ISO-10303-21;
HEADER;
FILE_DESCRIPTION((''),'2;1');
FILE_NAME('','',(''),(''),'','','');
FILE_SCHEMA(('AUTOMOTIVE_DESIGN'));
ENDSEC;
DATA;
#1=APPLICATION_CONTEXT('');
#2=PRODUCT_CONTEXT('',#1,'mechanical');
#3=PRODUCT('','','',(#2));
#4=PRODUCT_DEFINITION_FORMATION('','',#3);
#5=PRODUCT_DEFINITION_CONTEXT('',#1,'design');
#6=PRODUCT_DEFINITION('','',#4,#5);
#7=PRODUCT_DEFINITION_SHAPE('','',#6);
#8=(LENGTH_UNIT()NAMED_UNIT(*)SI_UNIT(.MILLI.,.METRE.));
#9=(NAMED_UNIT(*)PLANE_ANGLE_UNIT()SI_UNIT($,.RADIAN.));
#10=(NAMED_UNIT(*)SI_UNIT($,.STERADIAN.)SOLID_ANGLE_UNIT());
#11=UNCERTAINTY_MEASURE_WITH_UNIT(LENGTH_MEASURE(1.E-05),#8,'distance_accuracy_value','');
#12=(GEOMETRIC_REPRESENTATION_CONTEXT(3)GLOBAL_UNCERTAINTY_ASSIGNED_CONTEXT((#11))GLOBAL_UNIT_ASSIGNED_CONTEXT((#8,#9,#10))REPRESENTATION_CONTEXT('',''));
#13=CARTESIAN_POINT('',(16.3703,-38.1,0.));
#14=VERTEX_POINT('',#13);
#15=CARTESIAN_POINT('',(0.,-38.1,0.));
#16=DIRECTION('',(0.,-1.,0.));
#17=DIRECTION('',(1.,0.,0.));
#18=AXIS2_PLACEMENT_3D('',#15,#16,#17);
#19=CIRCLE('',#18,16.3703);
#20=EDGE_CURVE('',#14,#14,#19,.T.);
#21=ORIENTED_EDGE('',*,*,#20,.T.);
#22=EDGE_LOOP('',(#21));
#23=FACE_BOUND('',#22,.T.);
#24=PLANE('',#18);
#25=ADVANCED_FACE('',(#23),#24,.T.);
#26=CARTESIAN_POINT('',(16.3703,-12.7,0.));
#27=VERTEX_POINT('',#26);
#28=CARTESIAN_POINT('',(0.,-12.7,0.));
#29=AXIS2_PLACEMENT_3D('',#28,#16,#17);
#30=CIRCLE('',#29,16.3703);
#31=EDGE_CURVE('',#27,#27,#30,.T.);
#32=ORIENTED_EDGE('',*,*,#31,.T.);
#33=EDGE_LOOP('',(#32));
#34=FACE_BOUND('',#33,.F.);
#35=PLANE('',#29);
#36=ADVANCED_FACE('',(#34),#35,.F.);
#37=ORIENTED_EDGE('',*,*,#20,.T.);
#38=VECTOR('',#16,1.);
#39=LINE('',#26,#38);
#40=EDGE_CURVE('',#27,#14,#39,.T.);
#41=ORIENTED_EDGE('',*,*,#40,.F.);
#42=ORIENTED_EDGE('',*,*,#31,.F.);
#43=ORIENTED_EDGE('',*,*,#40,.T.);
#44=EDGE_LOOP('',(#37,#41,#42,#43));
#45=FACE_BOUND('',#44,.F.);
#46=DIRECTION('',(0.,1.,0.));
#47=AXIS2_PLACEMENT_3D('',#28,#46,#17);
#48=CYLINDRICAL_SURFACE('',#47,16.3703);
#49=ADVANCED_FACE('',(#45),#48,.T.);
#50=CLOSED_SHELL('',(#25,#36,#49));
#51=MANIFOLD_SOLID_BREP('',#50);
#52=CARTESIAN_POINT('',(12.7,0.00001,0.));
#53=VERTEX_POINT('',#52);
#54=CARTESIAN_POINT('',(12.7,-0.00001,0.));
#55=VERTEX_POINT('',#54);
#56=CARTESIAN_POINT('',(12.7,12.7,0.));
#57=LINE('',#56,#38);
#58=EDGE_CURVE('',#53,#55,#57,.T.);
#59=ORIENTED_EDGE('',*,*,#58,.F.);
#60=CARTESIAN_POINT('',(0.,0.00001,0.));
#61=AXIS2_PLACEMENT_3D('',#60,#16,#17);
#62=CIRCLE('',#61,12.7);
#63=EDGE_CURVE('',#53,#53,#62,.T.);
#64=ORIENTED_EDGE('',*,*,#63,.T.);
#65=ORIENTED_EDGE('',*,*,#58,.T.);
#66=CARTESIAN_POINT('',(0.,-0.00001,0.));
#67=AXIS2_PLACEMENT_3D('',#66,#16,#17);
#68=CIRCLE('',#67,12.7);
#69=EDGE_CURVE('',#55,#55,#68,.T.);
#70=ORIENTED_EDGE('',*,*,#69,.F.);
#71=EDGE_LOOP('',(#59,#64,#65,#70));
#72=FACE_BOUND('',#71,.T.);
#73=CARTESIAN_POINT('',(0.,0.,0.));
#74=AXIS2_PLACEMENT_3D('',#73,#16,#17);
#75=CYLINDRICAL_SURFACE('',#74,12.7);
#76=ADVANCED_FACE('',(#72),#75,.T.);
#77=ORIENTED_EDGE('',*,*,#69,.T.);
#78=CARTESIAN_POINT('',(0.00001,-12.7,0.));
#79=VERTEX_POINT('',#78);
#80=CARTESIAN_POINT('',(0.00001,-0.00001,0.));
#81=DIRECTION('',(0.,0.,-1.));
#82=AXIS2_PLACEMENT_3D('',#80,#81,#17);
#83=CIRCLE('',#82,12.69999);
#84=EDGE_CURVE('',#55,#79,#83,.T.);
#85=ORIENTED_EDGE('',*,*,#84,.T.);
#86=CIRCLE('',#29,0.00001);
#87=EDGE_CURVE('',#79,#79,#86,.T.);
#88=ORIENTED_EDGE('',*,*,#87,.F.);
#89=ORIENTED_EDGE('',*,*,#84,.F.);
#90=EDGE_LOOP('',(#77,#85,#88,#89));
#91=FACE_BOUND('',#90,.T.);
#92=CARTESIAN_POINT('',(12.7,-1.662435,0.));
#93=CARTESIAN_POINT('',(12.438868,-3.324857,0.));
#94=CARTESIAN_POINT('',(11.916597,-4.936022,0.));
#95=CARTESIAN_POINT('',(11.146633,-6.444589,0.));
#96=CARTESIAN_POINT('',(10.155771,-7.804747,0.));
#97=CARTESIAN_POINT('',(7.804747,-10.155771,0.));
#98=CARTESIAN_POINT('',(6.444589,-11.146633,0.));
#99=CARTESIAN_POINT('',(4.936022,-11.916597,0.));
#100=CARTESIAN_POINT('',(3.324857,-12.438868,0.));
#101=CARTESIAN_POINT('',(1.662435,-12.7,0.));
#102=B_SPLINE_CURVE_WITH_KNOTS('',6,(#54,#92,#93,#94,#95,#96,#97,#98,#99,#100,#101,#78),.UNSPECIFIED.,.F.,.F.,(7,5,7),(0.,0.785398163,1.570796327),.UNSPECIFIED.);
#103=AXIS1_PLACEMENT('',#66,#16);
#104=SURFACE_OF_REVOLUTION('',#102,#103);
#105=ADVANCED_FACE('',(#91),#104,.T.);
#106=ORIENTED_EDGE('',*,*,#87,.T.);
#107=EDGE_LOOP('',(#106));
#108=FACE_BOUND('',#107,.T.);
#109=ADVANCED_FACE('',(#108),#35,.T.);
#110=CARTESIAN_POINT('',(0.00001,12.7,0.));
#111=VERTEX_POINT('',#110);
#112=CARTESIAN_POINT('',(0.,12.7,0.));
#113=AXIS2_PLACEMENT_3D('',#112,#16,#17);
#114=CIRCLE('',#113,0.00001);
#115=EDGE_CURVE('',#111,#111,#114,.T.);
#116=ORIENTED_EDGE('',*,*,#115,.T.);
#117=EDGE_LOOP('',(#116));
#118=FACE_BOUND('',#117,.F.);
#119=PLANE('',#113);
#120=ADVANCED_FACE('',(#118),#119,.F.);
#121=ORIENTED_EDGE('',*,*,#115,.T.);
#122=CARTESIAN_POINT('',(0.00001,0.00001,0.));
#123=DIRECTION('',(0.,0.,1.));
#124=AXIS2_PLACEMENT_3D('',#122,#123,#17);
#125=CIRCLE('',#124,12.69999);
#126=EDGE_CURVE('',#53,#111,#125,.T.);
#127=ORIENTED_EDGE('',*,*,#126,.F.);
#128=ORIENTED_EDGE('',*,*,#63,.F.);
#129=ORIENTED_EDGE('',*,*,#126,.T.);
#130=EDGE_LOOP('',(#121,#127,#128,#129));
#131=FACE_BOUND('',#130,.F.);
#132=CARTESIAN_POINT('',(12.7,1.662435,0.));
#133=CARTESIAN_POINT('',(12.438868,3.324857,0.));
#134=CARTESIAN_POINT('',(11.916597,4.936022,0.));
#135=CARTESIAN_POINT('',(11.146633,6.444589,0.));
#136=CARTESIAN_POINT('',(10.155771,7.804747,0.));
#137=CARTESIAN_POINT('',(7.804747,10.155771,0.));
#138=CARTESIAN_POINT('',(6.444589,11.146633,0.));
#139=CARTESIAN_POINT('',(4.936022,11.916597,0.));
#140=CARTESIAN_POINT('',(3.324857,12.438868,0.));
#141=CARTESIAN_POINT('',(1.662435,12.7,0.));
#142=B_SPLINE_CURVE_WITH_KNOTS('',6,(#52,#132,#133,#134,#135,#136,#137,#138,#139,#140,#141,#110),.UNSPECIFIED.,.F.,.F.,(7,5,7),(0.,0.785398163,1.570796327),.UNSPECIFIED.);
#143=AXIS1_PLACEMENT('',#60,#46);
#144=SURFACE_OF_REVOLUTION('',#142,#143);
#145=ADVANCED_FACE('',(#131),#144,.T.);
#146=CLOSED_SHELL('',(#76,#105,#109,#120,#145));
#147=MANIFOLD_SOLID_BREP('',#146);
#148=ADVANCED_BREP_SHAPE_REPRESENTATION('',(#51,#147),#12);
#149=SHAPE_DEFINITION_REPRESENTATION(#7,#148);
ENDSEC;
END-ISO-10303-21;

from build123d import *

# Parameters (mm, degrees)
F0_R     = 12.7
F1_DEPTH = 12.7
F2_R     = 12.69999
F4_R     = 16.3703
F5_DEPTH = 25.4


# Not quite as in the source:
# - a fillet or chamfer is up to 0.001 mm smaller than in the source, because OpenCascade refuses the exact size


with BuildPart() as f1:
    # F0 (on Front) → F1 (new body, symmetric)
    with BuildSketch(Plane.XZ):
        Circle(F0_R)
    extrude(amount=F1_DEPTH, both=True)

    # F2 (radius 12.7 in the source; OpenCascade refuses exactly that, so slightly less here)
    f2_edges = [f1.edges().sort_by_distance(p)[0] for p in [
        (-12.7, -12.7, 0),
        (-12.7, 12.7, 0),
    ]]
    fillet(f2_edges, radius=F2_R)


with BuildPart() as f5:
    # F4 (on offset) → F5 (new body)
    with BuildSketch(Plane.XZ.offset(12.7)):
        Circle(F4_R)
    extrude(amount=F5_DEPTH)


solid = Compound([f1.part, f5.part])
